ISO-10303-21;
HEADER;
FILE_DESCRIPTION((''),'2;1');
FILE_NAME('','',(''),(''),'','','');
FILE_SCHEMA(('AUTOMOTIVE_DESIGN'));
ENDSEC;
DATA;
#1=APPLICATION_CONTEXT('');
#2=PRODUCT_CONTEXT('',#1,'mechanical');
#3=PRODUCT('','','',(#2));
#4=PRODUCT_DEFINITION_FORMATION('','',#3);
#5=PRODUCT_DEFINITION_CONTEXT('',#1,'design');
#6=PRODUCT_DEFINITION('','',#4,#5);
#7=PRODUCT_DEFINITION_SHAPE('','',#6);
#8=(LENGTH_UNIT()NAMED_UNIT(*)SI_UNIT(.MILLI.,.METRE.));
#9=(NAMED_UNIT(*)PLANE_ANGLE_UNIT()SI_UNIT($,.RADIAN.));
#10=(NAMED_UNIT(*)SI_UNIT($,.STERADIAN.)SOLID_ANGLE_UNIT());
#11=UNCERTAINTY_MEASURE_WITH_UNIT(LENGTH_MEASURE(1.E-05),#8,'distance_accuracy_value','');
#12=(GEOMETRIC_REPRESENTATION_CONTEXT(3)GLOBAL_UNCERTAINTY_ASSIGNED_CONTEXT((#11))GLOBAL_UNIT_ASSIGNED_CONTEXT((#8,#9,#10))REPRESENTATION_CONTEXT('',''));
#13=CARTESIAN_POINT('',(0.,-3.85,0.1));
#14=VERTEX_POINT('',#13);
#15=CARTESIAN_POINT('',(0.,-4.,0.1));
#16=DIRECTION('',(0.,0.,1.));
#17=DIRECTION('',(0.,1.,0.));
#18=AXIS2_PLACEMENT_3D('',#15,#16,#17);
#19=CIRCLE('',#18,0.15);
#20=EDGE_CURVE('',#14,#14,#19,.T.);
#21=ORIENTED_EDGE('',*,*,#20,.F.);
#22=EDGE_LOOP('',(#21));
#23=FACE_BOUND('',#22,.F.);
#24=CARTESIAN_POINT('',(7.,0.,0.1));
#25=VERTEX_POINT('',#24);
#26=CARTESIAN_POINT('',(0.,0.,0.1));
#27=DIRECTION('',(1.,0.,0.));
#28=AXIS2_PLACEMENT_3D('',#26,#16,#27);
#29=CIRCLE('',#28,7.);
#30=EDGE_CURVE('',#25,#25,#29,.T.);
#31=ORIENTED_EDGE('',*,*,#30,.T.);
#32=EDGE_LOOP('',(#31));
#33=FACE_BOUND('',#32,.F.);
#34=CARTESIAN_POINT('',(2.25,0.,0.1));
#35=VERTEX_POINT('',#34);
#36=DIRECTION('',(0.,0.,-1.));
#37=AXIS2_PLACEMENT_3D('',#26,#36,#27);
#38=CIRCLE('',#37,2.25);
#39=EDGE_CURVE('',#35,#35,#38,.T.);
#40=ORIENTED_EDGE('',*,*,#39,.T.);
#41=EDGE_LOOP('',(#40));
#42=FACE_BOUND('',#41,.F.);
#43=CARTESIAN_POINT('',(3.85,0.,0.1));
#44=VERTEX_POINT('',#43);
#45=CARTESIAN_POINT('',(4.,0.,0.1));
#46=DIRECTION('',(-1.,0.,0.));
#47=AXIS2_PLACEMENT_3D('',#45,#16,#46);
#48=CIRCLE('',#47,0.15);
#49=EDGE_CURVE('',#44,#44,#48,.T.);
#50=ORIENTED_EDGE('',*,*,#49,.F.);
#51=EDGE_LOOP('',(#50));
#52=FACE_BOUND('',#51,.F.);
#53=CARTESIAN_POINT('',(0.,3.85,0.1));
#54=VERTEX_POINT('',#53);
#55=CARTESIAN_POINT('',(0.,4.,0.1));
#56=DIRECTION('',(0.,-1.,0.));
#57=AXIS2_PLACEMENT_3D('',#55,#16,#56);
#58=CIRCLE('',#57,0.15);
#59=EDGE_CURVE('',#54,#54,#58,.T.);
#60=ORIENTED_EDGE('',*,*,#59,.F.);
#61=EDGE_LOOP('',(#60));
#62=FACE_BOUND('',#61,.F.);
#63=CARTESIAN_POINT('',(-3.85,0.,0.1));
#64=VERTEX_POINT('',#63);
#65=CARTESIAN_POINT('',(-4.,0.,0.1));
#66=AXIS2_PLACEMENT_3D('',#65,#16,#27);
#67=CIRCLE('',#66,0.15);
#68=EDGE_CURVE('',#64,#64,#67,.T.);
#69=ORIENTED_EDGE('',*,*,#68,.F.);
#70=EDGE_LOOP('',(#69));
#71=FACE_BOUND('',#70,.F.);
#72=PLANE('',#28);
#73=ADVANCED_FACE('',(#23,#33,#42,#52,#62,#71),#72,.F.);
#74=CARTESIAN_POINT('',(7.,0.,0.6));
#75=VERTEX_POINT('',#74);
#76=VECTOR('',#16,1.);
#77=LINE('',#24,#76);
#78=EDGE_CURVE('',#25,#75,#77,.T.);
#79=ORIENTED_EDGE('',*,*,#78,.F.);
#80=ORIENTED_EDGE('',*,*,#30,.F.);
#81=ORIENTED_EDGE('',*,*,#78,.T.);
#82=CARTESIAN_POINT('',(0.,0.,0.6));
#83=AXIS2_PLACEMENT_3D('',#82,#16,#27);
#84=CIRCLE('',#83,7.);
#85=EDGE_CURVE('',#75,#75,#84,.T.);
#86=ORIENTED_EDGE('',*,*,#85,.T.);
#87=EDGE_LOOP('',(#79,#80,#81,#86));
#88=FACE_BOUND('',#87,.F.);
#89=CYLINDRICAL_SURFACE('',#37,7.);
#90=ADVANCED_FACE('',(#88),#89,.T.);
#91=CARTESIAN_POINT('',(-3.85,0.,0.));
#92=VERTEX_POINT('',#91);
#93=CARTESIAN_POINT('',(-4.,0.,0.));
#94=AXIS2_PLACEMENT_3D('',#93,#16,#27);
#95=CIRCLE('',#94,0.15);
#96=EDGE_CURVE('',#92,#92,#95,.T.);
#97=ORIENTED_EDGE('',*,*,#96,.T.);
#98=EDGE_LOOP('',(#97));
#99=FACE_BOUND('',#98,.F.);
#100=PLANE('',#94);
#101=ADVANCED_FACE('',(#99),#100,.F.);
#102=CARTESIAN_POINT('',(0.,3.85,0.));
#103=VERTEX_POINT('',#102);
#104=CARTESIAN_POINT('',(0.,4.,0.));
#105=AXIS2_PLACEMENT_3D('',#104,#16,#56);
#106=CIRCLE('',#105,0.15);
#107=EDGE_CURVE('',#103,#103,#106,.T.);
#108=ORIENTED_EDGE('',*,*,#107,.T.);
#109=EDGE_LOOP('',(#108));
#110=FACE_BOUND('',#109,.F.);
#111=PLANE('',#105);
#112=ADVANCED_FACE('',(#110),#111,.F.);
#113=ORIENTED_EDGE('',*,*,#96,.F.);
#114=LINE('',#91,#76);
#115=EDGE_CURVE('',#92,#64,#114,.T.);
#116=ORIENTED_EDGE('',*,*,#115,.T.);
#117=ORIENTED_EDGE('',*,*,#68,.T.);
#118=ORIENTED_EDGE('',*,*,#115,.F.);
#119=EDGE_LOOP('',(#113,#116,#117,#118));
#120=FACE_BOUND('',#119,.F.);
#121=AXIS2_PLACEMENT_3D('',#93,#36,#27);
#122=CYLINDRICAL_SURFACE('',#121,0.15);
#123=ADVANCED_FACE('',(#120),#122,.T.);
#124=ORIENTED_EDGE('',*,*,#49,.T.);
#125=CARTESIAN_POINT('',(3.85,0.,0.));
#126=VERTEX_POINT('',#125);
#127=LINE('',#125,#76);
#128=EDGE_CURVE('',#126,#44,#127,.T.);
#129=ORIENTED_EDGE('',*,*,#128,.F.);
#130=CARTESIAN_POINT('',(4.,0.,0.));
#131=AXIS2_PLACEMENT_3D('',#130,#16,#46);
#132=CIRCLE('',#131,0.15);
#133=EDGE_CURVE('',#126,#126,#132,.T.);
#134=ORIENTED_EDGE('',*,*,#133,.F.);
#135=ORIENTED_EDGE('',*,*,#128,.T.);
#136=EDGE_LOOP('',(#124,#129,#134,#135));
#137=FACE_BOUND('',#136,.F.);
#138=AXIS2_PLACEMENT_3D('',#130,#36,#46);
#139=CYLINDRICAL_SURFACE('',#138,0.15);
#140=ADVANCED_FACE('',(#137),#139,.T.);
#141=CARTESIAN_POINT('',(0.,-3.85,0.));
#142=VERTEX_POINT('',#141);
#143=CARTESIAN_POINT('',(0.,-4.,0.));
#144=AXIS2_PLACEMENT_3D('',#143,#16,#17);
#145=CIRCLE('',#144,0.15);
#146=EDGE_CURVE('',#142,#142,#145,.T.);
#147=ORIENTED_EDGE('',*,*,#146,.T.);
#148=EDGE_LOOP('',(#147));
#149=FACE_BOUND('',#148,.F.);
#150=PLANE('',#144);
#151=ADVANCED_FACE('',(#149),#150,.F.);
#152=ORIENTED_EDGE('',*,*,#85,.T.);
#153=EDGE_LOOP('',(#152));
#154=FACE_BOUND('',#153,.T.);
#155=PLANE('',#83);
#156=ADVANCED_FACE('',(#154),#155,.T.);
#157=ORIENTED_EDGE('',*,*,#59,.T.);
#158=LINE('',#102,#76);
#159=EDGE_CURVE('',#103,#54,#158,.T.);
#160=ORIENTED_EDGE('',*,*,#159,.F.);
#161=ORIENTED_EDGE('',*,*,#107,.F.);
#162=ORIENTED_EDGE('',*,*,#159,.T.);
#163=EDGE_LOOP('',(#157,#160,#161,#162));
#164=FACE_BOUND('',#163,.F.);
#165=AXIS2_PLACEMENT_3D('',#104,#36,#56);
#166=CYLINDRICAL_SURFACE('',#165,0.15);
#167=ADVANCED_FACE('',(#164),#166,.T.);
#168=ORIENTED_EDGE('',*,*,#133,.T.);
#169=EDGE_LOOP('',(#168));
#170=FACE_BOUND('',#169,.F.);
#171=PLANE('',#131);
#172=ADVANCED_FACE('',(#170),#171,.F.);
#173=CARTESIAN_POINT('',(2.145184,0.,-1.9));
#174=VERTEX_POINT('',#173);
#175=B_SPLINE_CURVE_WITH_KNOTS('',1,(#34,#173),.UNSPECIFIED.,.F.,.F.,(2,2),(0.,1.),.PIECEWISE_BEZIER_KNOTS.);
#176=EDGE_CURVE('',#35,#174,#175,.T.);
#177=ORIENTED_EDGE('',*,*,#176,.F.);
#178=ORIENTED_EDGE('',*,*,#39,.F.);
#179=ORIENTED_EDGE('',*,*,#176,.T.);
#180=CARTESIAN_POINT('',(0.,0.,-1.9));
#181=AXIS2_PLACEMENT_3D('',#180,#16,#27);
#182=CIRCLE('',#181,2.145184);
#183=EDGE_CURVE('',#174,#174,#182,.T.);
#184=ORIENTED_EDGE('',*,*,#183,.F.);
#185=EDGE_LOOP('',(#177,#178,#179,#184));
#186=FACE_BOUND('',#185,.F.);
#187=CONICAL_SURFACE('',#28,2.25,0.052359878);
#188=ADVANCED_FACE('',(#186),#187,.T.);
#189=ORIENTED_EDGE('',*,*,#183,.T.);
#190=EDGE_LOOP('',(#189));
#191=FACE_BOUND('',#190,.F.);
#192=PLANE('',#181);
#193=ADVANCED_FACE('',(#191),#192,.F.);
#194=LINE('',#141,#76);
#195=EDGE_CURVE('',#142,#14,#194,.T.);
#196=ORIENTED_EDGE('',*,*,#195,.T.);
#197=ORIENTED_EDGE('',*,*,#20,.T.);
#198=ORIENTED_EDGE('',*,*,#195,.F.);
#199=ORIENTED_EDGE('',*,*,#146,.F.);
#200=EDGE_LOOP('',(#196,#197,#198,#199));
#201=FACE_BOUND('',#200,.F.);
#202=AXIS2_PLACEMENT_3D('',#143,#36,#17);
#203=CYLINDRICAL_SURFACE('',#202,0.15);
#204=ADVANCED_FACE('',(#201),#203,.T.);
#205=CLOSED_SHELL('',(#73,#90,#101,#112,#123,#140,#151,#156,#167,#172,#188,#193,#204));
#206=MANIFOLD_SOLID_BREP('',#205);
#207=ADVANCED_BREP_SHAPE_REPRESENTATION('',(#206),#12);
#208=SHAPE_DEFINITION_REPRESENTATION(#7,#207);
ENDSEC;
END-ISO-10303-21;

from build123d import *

# Parameters (mm, degrees)
F0_R            = 2.25
F1_DEPTH        = 2
F1_TAPER        = 3
F2_R            = 7
F3_DEPTH        = 0.5
F5_R            = 0.15
F6_DEPTH        = 0.1
F6_COPIES_COUNT = 4


# Not quite as in the source:
# - a pattern or mirror of a feature is missing from the dataset's text; its kind, count and spacing are read off the source's solid


with BuildPart() as f1:
    # F0 (on Top) → F1 (new body)
    with BuildSketch(Plane.XY):
        Circle(F0_R)
    extrude(amount=-F1_DEPTH, taper=F1_TAPER)

    # F2 (on Top) → F3 (join)
    with BuildSketch(Plane.XY):
        Circle(F2_R)
    extrude(amount=F3_DEPTH)


with BuildPart() as f1_1:
    # F4: moved
    add(f1.part.moved(Location((0, 0, 0.1))))

    # F5 (on Top) → F6 (join)
    with BuildSketch(Plane.XY):
        with Locations((-4, 0)):
            Circle(F5_R)
    f6 = extrude(amount=F6_DEPTH)

    # F6_copies: F6 ×4 about axis
    f6_copies_axis = Axis((0, 0, 0), (0, 0, 1))
    for i in range(1, F6_COPIES_COUNT):
        add(f6.rotate(f6_copies_axis, i * 360 / F6_COPIES_COUNT))


solid = f1_1.part
